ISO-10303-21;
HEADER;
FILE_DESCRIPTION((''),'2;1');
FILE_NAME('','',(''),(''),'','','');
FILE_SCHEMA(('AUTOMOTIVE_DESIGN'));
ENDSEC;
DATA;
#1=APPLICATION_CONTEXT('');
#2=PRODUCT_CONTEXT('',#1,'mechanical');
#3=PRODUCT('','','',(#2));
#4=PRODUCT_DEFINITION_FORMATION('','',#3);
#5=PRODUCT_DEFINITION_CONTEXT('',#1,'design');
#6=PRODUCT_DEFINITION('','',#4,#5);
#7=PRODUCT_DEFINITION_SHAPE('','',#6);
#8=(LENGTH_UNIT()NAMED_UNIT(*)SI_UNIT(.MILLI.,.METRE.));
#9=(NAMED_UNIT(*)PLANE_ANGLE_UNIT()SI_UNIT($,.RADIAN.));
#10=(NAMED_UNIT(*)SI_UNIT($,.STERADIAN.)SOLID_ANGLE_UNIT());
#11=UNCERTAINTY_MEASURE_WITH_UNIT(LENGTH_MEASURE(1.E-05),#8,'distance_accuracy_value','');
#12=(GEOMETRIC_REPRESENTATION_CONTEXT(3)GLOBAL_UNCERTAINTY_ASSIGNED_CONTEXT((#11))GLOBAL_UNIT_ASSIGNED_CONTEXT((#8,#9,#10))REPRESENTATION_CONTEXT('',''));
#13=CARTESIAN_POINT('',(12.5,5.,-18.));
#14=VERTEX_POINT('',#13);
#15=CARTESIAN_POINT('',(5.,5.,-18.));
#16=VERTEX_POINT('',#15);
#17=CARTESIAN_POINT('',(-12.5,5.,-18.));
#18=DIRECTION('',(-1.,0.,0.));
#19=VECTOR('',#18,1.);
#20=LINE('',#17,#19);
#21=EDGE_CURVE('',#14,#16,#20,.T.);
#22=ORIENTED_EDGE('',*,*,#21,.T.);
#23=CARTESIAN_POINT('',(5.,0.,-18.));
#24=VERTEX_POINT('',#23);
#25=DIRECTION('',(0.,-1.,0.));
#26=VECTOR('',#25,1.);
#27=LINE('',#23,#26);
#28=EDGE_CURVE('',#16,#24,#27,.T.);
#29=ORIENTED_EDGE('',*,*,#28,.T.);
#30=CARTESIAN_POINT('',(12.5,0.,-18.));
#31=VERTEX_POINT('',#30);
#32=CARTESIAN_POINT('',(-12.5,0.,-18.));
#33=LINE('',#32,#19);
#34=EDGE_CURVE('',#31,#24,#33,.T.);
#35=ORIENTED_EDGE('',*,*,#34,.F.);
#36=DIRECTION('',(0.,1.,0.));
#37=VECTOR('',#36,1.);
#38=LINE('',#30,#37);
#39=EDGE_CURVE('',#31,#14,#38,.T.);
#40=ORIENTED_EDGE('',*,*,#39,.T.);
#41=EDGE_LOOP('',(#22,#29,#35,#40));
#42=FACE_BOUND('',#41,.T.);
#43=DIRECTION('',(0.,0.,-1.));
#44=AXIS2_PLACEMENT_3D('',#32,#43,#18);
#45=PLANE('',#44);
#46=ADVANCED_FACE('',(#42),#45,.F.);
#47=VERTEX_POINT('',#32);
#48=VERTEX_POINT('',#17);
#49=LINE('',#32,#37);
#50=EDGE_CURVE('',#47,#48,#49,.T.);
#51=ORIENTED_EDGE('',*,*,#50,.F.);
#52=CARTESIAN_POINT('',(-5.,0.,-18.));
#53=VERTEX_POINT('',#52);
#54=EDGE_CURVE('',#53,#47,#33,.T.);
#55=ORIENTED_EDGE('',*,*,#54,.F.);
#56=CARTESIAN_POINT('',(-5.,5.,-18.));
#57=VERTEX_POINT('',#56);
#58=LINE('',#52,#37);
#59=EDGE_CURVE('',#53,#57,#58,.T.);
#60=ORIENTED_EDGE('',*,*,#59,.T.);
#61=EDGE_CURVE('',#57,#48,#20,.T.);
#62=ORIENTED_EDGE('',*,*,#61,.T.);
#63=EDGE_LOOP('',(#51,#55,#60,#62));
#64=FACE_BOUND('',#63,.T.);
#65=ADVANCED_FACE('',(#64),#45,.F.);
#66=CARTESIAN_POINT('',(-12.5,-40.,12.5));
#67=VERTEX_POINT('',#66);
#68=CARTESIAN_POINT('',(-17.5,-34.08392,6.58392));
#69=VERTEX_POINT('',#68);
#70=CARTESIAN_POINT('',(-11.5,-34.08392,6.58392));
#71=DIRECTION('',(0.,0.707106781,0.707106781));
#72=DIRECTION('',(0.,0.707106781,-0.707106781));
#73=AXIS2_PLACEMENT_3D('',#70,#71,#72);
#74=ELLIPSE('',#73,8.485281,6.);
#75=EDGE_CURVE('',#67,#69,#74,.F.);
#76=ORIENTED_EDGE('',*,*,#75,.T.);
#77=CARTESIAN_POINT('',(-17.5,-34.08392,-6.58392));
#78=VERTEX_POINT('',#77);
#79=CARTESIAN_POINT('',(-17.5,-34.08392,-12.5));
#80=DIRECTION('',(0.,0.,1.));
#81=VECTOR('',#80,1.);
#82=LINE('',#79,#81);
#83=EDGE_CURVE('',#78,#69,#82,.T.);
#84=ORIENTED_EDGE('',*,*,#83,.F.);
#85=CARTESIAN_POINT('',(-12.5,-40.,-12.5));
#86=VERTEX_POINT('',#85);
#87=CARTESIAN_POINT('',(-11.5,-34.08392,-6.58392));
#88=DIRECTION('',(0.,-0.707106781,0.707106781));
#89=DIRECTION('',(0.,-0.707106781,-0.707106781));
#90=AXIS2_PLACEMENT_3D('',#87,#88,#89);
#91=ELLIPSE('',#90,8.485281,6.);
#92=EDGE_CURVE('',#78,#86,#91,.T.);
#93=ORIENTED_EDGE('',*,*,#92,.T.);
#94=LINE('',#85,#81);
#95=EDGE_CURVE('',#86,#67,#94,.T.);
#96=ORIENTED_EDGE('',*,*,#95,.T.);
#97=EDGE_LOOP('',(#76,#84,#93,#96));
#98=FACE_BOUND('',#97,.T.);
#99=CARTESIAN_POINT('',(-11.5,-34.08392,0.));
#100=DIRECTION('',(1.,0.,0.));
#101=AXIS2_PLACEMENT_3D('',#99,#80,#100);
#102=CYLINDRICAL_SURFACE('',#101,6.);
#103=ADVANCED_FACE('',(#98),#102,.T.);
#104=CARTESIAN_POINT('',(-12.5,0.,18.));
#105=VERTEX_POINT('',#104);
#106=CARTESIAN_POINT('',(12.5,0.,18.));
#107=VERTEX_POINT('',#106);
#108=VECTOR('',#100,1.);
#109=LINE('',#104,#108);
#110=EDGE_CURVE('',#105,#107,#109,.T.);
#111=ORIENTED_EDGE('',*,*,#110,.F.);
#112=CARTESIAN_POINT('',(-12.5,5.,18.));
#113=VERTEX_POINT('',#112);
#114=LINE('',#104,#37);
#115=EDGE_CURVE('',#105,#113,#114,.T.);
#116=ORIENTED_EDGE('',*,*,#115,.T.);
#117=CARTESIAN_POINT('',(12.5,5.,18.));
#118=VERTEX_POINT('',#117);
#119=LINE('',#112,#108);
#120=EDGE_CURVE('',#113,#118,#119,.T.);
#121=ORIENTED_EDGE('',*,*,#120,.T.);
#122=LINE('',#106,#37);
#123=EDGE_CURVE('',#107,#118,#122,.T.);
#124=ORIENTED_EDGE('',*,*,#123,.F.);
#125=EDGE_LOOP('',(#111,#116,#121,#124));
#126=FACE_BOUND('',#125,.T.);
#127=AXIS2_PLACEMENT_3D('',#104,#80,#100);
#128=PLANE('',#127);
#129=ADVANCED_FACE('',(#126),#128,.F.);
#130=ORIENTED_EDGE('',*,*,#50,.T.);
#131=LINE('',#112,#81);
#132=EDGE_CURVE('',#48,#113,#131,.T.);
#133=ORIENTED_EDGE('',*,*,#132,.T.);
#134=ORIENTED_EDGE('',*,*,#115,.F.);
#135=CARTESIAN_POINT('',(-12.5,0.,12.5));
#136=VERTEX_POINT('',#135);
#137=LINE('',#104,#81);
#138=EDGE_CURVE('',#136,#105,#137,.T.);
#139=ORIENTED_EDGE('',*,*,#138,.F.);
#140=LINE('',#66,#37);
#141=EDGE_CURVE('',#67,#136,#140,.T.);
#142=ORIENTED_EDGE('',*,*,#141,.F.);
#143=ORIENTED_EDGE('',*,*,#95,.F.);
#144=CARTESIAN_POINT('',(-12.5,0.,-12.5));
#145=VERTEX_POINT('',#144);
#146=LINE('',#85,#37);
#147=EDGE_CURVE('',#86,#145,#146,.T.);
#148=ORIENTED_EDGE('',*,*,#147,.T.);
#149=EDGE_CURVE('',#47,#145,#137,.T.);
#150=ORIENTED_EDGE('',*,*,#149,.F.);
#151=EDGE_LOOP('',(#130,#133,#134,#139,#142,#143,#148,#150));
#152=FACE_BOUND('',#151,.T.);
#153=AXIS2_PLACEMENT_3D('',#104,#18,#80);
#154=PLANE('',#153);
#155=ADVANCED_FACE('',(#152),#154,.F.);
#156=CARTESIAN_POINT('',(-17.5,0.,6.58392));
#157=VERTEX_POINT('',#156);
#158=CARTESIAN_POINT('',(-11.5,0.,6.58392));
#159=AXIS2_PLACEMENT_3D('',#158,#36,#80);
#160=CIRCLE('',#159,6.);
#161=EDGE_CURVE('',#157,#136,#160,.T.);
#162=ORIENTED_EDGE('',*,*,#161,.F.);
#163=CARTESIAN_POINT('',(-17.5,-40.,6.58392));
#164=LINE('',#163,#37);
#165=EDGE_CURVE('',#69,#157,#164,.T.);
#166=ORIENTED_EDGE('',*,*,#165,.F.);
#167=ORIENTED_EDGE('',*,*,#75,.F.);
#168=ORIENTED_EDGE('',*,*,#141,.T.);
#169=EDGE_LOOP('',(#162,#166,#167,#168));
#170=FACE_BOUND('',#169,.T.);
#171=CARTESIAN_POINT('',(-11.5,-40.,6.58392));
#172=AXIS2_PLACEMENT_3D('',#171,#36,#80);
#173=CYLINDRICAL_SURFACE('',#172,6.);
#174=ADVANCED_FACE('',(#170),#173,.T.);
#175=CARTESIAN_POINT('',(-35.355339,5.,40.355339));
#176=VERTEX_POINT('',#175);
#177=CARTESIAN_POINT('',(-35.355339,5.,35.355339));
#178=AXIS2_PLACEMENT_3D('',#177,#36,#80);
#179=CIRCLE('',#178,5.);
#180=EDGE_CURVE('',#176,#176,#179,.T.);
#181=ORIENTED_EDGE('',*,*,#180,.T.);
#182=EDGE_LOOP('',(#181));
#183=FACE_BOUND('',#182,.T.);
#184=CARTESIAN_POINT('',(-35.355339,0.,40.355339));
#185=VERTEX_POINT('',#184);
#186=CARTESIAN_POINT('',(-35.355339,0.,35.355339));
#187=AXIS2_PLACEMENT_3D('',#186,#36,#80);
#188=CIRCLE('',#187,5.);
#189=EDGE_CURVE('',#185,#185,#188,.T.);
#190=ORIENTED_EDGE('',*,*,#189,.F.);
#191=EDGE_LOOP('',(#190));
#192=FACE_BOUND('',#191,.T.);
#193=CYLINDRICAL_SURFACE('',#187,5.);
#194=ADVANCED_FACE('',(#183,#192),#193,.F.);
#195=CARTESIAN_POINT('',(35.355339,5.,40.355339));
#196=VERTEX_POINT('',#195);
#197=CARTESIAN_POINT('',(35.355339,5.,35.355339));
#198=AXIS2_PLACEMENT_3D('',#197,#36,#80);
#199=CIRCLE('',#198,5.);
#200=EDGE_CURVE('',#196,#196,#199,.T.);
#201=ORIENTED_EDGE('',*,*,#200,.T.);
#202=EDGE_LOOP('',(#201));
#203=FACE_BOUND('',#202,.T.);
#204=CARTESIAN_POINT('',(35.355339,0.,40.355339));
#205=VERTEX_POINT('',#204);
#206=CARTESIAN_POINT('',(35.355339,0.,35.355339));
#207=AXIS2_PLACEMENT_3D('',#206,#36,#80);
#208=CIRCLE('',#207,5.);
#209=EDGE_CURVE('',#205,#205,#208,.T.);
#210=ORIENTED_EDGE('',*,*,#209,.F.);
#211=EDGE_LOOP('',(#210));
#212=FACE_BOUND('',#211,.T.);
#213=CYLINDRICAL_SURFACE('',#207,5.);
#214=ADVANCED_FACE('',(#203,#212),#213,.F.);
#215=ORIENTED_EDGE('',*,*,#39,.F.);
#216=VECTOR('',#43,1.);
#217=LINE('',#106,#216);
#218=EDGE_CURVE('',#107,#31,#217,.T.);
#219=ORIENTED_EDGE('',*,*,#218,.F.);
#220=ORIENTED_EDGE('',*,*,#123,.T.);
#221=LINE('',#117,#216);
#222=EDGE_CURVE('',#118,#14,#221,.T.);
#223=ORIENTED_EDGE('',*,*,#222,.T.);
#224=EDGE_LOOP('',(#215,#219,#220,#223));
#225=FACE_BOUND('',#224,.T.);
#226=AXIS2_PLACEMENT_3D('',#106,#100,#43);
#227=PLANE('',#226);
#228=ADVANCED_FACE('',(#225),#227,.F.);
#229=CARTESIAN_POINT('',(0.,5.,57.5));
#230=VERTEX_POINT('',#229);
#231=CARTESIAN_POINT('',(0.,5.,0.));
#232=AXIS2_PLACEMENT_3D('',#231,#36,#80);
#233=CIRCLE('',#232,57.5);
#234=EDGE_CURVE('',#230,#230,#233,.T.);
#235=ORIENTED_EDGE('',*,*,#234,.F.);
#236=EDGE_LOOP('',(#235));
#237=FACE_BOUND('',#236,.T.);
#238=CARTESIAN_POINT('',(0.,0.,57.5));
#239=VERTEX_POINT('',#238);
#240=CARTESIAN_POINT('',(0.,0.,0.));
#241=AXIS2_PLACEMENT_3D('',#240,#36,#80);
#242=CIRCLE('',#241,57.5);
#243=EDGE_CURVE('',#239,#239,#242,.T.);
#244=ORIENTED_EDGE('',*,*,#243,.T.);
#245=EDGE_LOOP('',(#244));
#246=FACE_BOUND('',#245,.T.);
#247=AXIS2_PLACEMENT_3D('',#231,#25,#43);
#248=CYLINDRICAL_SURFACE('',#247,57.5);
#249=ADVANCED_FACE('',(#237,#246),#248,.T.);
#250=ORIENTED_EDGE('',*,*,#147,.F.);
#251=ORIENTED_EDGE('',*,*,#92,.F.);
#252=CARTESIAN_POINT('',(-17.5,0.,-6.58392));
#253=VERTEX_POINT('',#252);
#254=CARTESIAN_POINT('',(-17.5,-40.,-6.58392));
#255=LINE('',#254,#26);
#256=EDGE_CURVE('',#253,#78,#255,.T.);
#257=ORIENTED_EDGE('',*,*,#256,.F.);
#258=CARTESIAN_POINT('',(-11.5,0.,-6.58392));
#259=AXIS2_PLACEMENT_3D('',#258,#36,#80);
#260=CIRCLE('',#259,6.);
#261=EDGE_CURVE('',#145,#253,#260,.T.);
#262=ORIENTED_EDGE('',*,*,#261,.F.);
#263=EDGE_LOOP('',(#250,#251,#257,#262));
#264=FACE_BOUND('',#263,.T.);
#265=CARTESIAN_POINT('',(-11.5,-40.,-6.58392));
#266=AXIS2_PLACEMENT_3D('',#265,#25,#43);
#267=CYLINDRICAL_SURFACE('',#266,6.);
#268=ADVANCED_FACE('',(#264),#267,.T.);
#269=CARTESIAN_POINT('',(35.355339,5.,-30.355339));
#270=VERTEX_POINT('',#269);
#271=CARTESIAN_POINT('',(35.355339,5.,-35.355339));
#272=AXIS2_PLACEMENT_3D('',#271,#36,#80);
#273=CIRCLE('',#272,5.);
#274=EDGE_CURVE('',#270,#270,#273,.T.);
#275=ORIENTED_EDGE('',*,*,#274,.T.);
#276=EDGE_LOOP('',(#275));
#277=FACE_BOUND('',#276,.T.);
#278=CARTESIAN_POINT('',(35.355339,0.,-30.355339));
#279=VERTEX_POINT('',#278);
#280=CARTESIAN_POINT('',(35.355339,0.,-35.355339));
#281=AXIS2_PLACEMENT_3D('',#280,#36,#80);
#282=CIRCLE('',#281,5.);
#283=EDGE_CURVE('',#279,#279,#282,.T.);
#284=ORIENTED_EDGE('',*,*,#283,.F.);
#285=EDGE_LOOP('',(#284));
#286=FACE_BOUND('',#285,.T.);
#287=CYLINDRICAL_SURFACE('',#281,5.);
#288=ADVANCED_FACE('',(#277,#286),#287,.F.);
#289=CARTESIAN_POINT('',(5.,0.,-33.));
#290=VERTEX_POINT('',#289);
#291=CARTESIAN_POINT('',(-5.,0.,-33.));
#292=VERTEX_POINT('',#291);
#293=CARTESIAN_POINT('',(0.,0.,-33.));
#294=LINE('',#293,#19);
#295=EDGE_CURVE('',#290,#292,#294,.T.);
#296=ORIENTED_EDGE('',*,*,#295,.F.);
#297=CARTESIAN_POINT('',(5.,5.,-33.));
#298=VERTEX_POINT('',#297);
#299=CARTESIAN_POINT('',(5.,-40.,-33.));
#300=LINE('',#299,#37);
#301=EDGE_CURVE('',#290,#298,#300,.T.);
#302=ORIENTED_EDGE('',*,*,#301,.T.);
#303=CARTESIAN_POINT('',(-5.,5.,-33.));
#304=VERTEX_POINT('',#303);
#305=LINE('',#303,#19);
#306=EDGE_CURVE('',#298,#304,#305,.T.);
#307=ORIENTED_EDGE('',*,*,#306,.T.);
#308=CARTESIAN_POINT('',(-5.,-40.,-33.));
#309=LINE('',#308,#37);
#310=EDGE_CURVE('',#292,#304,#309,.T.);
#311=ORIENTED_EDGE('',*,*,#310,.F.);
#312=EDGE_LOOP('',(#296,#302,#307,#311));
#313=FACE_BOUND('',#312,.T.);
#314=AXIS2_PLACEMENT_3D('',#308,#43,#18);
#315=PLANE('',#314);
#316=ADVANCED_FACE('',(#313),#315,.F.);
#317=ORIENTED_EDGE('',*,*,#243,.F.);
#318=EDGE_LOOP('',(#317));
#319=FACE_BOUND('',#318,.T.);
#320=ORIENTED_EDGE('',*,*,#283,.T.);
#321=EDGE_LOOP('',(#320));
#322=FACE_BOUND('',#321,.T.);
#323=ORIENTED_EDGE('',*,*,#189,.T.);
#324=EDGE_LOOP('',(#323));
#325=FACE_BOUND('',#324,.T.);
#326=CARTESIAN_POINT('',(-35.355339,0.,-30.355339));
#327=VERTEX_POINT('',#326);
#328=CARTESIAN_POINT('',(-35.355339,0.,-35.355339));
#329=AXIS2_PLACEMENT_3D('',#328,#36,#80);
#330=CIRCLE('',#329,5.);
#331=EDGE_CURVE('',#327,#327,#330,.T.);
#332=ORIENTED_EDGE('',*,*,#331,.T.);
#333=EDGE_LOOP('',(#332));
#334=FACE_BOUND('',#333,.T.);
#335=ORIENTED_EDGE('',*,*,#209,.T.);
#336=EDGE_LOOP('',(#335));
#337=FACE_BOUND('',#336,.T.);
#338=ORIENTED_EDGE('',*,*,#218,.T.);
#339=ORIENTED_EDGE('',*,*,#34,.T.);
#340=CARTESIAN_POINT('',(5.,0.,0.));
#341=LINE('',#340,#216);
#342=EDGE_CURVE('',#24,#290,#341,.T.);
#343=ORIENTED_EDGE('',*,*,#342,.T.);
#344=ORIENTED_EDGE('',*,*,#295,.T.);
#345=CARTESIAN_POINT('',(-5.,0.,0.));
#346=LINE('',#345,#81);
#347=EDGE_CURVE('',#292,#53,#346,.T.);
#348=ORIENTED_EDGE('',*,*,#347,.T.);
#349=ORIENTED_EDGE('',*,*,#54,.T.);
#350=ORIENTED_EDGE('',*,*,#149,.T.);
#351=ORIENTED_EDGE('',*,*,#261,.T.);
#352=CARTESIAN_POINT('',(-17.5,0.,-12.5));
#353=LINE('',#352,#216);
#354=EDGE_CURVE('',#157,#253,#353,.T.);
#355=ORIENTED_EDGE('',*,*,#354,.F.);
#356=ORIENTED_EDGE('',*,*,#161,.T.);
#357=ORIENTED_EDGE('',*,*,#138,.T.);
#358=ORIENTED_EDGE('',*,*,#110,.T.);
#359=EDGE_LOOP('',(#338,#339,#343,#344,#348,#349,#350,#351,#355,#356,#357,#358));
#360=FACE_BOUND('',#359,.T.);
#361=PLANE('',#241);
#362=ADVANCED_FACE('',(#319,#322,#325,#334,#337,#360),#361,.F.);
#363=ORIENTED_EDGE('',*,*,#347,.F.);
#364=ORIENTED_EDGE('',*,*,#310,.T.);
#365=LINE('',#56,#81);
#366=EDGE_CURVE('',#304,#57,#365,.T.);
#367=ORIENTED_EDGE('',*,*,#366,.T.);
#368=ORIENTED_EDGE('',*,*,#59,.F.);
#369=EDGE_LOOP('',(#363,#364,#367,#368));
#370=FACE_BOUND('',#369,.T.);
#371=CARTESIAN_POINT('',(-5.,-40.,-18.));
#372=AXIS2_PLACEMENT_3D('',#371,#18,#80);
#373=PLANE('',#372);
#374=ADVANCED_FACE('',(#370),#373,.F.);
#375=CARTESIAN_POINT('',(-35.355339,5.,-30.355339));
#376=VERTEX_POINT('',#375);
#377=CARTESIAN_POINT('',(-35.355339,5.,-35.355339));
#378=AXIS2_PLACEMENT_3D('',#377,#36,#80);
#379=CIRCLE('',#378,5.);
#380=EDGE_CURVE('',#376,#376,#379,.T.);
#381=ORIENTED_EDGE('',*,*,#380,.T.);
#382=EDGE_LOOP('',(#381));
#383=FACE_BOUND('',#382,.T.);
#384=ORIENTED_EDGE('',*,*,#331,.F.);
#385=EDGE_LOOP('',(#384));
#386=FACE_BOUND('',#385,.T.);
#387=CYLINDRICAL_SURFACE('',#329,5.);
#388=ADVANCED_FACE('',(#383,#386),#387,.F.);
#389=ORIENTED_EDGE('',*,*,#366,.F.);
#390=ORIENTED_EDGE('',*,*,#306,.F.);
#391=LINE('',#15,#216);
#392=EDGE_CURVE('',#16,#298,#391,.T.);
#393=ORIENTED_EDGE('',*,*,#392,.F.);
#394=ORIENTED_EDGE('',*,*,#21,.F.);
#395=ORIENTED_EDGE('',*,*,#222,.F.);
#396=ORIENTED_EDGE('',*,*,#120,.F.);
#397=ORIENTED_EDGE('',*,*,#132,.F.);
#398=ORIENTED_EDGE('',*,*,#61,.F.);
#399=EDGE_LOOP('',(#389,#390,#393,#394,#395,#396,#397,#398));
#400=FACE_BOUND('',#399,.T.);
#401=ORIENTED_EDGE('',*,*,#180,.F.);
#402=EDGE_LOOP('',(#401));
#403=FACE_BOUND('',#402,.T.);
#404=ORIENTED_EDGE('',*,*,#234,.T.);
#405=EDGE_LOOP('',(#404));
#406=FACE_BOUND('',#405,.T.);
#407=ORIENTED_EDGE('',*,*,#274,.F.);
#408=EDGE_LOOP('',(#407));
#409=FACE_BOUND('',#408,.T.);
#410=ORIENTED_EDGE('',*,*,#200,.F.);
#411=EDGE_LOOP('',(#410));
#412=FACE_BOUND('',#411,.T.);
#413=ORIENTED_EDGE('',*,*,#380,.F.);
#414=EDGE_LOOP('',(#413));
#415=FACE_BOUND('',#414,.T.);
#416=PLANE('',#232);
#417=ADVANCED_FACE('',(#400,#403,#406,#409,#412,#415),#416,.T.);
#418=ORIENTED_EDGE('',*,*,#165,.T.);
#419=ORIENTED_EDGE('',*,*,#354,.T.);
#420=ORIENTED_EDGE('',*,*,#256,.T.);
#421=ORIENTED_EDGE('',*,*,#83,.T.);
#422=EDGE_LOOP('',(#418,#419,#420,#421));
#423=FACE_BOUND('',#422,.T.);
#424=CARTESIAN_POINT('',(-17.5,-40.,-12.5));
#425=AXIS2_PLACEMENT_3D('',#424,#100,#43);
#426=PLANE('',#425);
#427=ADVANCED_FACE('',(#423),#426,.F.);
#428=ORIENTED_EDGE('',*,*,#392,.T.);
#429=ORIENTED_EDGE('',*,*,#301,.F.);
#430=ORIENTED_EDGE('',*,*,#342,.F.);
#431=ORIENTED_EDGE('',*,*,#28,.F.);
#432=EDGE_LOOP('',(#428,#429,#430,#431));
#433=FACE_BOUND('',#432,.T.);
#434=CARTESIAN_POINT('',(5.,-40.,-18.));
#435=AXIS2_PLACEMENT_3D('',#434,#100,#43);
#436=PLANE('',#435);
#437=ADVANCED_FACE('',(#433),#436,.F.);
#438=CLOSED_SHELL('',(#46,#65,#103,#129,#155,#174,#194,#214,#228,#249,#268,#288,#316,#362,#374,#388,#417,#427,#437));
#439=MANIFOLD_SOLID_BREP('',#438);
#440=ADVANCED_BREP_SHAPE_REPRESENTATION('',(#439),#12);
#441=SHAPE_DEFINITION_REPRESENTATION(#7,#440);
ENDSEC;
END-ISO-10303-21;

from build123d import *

# Parameters (mm, degrees)
SKETCH2_R           = 57.5
BOSS_EXTRUDE1_DEPTH = 5
SKETCH3_R           = 5
CUT_EXTRUDE1_DEPTH  = 82.470853684
SKETCH4_W           = 25
SKETCH4_H           = 36
CUT_EXTRUDE2_DEPTH  = 82.470853684
SKETCH5_W           = 5
SKETCH5_H           = 25
BOSS_EXTRUDE2_DEPTH = 40
FILLET1_R           = 6
SKETCH7_W           = 10
SKETCH7_H           = 15
CUT_EXTRUDE3_DEPTH  = 93.938151477


with BuildPart() as part:
    # Sketch2 → Boss-Extrude1 (new body)
    with BuildSketch(Plane(origin=(0, 0, 0), x_dir=(1, 0, 0), z_dir=(0, 1, 0))):
        with Locations(Location((0, 0, 0), (0, 0, 270))):
            Circle(SKETCH2_R)
    extrude(amount=BOSS_EXTRUDE1_DEPTH)

    # Sketch3 → Cut-Extrude1 (cut, through all)
    with BuildSketch(Plane(origin=(0, 5, 0), x_dir=(1, 0, 0), z_dir=(0, 1, 0))):
        with Locations(Location((-35.355339059, 35.355339059, 0), (0, 0, 270))):
            Circle(SKETCH3_R)
        with Locations(Location((35.355339059, 35.355339059, 0), (0, 0, 270))):
            Circle(SKETCH3_R)
        with Locations(Location((35.355339059, -35.355339059, 0), (0, 0, 270))):
            Circle(SKETCH3_R)
        with Locations(Location((-35.355339059, -35.355339059, 0), (0, 0, 270))):
            Circle(SKETCH3_R)
    extrude(amount=-CUT_EXTRUDE1_DEPTH, mode=Mode.SUBTRACT)

    # Sketch4 → Cut-Extrude2 (cut, through all)
    with BuildSketch(Plane(origin=(0, 5, 0), x_dir=(1, 0, 0), z_dir=(0, 1, 0))):
        Rectangle(SKETCH4_W, SKETCH4_H)
    extrude(amount=-CUT_EXTRUDE2_DEPTH, mode=Mode.SUBTRACT)

    # Sketch5 → Boss-Extrude2 (add)
    with BuildSketch(Plane.XZ):
        with Locations((-15, 0)):
            Rectangle(SKETCH5_W, SKETCH5_H)
    extrude(amount=BOSS_EXTRUDE2_DEPTH)

    # Fillet1
    # the kernel refuses this fillet: 6 mm, written as the material it takes off along each edge
    with BuildSketch(Plane(origin=(-17.5, -40, 27.290199458), x_dir=(0, 1, 0), z_dir=(0, 0, -1))) as fillet1_piece_1:
        with BuildLine():
            CenterArc((5.916079783, 6), FILLET1_R, 189.594068227, 80.405931773)
            Line((0, 5), (0, 0))
            Line((0, 0), (5.916079783, 0))
        make_face()
    extrude(amount=54.580398916, mode=Mode.SUBTRACT)
    with BuildSketch(Plane(origin=(-17.5, 0, -12.5), x_dir=(1, 0, 0), z_dir=(0, -1, 0))) as fillet1_piece_2:
        with BuildLine():
            CenterArc((6, 5.916079783), FILLET1_R, 180, 80.405931773)
            Line((0, 5.916079783), (0, 0))
            Line((0, 0), (5, 0))
        make_face()
    extrude(amount=54.790199458, mode=Mode.SUBTRACT)
    with BuildSketch(Plane(origin=(-17.5, 0, 12.5), x_dir=(0, 0, -1), z_dir=(0, -1, 0))) as fillet1_piece_3:
        with BuildLine():
            CenterArc((5.916079783, 6), FILLET1_R, 189.594068227, 80.405931773)
            Line((0, 5), (0, 0))
            Line((0, 0), (5.916079783, 0))
        make_face()
    extrude(amount=54.790199458, mode=Mode.SUBTRACT)

    # Sketch7 → Cut-Extrude3 (cut, through all)
    with BuildSketch(Plane(origin=(0, 5, 0), x_dir=(1, 0, 0), z_dir=(0, 1, 0))):
        with Locations((0, 25.5)):
            Rectangle(SKETCH7_W, SKETCH7_H)
    extrude(amount=-CUT_EXTRUDE3_DEPTH, mode=Mode.SUBTRACT)


solid = part.part
